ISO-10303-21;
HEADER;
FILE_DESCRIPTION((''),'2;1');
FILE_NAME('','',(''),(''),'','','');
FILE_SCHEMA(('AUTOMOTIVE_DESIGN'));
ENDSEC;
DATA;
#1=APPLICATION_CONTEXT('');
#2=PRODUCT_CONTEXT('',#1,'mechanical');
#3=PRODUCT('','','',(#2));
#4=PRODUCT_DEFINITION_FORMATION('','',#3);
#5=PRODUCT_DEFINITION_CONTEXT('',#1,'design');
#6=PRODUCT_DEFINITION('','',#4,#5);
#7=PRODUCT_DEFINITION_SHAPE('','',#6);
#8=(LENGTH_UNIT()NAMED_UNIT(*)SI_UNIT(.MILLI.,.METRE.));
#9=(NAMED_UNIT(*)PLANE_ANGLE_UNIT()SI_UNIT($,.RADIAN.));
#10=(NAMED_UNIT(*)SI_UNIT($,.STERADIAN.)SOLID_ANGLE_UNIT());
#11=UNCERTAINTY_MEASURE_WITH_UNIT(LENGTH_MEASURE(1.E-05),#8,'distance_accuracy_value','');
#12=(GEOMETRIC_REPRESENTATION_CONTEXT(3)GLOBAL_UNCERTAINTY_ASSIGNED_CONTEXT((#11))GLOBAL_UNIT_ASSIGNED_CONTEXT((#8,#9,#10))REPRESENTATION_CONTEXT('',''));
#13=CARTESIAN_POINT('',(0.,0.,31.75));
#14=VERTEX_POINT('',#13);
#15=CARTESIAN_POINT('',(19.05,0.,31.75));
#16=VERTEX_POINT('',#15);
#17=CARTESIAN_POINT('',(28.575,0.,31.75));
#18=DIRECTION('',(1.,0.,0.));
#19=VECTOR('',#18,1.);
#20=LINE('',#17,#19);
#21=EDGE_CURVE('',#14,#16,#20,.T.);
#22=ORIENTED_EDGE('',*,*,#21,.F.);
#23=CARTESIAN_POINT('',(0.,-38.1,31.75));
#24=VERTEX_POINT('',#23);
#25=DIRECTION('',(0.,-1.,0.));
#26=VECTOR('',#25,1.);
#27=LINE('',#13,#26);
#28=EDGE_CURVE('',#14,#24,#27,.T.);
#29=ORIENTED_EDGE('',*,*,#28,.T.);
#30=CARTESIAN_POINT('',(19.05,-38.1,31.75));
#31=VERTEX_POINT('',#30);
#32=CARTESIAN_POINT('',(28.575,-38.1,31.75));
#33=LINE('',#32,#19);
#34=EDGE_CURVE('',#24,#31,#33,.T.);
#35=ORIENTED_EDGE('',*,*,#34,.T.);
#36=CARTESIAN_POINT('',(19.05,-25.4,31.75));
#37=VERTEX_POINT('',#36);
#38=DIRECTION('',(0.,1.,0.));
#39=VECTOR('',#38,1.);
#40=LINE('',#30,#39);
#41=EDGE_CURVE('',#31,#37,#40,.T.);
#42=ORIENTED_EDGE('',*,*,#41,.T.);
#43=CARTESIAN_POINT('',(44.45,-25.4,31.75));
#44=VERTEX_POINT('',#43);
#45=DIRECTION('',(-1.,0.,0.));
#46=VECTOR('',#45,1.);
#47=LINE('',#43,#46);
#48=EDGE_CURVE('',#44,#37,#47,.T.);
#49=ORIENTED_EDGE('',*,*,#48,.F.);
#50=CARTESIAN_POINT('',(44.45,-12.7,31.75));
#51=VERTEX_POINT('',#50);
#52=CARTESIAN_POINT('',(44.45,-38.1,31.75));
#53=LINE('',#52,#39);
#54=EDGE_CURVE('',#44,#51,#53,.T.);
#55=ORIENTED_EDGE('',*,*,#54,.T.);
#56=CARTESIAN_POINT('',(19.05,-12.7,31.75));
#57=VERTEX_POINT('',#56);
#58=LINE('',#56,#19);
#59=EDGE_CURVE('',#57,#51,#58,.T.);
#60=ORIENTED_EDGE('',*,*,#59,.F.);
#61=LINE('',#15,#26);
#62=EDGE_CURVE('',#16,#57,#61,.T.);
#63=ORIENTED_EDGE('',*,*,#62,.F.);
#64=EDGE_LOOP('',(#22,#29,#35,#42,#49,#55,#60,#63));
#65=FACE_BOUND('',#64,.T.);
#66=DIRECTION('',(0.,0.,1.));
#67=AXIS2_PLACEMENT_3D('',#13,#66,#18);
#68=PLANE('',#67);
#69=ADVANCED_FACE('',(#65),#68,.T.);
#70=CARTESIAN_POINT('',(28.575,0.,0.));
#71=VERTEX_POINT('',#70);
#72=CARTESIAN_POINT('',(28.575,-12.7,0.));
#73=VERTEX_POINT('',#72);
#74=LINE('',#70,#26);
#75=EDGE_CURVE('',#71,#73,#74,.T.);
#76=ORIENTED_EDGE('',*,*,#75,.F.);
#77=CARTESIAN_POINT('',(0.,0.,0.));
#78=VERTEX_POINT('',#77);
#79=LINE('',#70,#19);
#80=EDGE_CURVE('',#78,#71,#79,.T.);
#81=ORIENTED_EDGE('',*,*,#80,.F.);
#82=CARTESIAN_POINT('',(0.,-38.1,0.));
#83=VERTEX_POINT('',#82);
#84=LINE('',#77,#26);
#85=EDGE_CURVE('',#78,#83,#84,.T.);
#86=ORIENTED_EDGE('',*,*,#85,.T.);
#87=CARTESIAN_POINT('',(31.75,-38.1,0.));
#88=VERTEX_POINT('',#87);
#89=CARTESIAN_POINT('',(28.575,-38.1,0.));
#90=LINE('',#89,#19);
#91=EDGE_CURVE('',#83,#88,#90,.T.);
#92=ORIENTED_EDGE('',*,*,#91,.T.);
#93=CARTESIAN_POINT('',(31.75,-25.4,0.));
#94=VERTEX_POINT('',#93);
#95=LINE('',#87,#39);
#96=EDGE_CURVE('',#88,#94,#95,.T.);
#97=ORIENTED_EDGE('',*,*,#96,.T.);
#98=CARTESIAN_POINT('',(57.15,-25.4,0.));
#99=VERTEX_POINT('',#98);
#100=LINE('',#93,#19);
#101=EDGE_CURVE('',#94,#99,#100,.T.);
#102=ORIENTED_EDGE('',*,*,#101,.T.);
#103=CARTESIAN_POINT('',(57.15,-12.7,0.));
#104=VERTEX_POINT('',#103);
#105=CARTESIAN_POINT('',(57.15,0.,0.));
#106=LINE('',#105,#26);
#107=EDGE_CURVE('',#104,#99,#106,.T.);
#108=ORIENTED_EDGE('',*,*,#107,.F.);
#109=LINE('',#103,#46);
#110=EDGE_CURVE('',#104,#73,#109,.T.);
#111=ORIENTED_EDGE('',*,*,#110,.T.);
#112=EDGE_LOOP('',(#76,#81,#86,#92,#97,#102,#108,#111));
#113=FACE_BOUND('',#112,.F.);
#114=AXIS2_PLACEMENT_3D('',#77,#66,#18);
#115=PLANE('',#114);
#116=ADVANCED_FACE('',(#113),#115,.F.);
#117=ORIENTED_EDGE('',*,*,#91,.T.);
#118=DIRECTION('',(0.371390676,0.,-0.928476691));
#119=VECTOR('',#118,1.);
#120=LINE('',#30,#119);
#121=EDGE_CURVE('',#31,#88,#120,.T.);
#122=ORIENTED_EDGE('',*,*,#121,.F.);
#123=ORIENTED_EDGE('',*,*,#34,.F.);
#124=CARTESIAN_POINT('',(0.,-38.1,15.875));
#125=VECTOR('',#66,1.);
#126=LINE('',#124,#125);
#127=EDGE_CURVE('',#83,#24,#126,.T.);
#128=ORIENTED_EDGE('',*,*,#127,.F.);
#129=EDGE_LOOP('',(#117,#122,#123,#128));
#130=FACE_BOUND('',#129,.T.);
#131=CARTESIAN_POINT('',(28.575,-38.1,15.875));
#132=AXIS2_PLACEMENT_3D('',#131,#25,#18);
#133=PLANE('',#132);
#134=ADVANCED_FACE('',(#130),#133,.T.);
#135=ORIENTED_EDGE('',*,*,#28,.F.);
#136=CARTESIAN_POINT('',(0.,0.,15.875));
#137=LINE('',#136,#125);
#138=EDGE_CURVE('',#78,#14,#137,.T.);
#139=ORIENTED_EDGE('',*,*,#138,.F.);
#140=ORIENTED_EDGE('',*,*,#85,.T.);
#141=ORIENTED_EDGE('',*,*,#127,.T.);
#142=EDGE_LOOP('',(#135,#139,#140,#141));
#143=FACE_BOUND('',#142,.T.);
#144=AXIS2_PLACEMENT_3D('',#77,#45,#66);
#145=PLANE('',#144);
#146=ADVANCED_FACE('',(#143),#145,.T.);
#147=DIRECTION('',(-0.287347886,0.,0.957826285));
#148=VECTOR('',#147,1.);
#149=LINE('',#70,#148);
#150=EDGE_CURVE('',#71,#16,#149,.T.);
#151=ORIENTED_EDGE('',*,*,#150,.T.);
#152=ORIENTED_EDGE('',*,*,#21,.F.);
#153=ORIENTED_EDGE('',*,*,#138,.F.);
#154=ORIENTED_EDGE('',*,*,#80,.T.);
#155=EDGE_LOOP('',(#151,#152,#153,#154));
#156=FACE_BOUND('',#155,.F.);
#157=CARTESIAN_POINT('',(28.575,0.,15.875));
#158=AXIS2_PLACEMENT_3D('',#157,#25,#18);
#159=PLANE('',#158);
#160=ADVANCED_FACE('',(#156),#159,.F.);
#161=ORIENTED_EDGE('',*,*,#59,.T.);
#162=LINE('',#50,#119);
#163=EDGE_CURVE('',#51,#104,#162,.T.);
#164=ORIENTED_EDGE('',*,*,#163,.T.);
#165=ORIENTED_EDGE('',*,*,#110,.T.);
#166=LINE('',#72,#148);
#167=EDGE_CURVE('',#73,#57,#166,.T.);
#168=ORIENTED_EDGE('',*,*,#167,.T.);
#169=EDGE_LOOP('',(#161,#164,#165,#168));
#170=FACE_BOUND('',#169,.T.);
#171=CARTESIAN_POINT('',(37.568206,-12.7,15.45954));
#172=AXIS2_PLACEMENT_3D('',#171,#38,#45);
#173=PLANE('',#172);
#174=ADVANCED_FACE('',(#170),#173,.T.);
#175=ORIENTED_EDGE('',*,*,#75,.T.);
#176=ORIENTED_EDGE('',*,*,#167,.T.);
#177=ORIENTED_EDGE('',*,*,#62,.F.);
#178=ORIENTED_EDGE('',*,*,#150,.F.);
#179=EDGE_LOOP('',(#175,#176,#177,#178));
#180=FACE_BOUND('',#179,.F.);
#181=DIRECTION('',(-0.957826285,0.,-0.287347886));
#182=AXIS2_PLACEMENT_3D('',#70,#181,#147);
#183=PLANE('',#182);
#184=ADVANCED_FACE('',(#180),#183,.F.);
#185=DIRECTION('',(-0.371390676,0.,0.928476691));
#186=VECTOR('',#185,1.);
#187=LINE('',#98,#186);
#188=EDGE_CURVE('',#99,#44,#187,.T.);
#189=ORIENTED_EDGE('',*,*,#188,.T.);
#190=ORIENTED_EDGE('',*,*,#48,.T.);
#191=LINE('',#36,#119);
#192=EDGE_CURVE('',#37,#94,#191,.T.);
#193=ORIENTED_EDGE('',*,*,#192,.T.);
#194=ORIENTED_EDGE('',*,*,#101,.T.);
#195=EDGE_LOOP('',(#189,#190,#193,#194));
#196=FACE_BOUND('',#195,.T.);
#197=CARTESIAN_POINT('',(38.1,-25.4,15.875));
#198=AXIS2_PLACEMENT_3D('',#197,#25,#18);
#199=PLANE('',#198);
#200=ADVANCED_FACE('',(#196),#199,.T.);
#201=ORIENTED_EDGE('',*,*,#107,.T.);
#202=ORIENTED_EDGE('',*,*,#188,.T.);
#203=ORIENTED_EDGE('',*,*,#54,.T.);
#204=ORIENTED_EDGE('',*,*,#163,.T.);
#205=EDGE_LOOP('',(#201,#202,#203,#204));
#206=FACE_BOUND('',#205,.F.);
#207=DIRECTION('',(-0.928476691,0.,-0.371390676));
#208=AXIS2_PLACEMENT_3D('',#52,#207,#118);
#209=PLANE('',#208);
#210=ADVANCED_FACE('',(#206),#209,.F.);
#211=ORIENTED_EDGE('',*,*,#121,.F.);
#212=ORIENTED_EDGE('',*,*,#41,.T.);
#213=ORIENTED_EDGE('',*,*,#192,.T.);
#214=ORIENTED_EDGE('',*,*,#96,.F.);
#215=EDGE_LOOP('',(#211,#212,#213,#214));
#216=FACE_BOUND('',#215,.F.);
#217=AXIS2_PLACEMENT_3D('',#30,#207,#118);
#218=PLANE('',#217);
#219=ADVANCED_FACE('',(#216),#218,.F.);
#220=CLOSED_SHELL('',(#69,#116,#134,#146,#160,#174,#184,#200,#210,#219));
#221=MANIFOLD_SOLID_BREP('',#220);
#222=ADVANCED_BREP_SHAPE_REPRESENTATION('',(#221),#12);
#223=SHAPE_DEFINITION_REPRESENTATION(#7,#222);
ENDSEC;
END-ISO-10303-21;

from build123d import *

# Parameters (mm, degrees)
F0_W     = 57.15
F0_H     = 31.75
F1_DEPTH = 38.1
F3_DEPTH = 38.1
F5_DEPTH = 12.7
F7_DEPTH = 12.7


# Not quite as in the source:
# - a length typed as a fraction of an inch, garbled in the dataset ("3 / 203.2 mm" for 3/8 in), is restored


with BuildPart() as f1:
    # F0 (on Front) → F1 (new body)
    with BuildSketch(Plane.XZ):
        with Locations((28.575, 15.875)):
            Rectangle(F0_W, F0_H)
    extrude(amount=F1_DEPTH)

    # F2 (on face) → F3 (cut)
    with BuildSketch(Plane.XZ.offset(38.1)):
        Polygon((44.45, 31.75), (57.15, 0), (57.15, 31.75), align=None)
    extrude(amount=-F3_DEPTH, mode=Mode.SUBTRACT)

    # F4 (on face) → F5 (cut)
    with BuildSketch(Plane(origin=(0, 0, 0), x_dir=(-1, 0, 0), z_dir=(0, 1, 0))):
        Polygon((-44.45, 31.75), (-57.15, 0), (-28.575, 0), (-19.05, 31.75), align=None)
    extrude(amount=-F5_DEPTH, mode=Mode.SUBTRACT)

    # F6 (on face) → F7 (cut)
    with BuildSketch(Plane.XZ.offset(38.1)):
        Polygon((31.75, 0), (57.15, 0), (44.45, 31.75), (19.05, 31.75), align=None)
    extrude(amount=-F7_DEPTH, mode=Mode.SUBTRACT)


solid = f1.part
